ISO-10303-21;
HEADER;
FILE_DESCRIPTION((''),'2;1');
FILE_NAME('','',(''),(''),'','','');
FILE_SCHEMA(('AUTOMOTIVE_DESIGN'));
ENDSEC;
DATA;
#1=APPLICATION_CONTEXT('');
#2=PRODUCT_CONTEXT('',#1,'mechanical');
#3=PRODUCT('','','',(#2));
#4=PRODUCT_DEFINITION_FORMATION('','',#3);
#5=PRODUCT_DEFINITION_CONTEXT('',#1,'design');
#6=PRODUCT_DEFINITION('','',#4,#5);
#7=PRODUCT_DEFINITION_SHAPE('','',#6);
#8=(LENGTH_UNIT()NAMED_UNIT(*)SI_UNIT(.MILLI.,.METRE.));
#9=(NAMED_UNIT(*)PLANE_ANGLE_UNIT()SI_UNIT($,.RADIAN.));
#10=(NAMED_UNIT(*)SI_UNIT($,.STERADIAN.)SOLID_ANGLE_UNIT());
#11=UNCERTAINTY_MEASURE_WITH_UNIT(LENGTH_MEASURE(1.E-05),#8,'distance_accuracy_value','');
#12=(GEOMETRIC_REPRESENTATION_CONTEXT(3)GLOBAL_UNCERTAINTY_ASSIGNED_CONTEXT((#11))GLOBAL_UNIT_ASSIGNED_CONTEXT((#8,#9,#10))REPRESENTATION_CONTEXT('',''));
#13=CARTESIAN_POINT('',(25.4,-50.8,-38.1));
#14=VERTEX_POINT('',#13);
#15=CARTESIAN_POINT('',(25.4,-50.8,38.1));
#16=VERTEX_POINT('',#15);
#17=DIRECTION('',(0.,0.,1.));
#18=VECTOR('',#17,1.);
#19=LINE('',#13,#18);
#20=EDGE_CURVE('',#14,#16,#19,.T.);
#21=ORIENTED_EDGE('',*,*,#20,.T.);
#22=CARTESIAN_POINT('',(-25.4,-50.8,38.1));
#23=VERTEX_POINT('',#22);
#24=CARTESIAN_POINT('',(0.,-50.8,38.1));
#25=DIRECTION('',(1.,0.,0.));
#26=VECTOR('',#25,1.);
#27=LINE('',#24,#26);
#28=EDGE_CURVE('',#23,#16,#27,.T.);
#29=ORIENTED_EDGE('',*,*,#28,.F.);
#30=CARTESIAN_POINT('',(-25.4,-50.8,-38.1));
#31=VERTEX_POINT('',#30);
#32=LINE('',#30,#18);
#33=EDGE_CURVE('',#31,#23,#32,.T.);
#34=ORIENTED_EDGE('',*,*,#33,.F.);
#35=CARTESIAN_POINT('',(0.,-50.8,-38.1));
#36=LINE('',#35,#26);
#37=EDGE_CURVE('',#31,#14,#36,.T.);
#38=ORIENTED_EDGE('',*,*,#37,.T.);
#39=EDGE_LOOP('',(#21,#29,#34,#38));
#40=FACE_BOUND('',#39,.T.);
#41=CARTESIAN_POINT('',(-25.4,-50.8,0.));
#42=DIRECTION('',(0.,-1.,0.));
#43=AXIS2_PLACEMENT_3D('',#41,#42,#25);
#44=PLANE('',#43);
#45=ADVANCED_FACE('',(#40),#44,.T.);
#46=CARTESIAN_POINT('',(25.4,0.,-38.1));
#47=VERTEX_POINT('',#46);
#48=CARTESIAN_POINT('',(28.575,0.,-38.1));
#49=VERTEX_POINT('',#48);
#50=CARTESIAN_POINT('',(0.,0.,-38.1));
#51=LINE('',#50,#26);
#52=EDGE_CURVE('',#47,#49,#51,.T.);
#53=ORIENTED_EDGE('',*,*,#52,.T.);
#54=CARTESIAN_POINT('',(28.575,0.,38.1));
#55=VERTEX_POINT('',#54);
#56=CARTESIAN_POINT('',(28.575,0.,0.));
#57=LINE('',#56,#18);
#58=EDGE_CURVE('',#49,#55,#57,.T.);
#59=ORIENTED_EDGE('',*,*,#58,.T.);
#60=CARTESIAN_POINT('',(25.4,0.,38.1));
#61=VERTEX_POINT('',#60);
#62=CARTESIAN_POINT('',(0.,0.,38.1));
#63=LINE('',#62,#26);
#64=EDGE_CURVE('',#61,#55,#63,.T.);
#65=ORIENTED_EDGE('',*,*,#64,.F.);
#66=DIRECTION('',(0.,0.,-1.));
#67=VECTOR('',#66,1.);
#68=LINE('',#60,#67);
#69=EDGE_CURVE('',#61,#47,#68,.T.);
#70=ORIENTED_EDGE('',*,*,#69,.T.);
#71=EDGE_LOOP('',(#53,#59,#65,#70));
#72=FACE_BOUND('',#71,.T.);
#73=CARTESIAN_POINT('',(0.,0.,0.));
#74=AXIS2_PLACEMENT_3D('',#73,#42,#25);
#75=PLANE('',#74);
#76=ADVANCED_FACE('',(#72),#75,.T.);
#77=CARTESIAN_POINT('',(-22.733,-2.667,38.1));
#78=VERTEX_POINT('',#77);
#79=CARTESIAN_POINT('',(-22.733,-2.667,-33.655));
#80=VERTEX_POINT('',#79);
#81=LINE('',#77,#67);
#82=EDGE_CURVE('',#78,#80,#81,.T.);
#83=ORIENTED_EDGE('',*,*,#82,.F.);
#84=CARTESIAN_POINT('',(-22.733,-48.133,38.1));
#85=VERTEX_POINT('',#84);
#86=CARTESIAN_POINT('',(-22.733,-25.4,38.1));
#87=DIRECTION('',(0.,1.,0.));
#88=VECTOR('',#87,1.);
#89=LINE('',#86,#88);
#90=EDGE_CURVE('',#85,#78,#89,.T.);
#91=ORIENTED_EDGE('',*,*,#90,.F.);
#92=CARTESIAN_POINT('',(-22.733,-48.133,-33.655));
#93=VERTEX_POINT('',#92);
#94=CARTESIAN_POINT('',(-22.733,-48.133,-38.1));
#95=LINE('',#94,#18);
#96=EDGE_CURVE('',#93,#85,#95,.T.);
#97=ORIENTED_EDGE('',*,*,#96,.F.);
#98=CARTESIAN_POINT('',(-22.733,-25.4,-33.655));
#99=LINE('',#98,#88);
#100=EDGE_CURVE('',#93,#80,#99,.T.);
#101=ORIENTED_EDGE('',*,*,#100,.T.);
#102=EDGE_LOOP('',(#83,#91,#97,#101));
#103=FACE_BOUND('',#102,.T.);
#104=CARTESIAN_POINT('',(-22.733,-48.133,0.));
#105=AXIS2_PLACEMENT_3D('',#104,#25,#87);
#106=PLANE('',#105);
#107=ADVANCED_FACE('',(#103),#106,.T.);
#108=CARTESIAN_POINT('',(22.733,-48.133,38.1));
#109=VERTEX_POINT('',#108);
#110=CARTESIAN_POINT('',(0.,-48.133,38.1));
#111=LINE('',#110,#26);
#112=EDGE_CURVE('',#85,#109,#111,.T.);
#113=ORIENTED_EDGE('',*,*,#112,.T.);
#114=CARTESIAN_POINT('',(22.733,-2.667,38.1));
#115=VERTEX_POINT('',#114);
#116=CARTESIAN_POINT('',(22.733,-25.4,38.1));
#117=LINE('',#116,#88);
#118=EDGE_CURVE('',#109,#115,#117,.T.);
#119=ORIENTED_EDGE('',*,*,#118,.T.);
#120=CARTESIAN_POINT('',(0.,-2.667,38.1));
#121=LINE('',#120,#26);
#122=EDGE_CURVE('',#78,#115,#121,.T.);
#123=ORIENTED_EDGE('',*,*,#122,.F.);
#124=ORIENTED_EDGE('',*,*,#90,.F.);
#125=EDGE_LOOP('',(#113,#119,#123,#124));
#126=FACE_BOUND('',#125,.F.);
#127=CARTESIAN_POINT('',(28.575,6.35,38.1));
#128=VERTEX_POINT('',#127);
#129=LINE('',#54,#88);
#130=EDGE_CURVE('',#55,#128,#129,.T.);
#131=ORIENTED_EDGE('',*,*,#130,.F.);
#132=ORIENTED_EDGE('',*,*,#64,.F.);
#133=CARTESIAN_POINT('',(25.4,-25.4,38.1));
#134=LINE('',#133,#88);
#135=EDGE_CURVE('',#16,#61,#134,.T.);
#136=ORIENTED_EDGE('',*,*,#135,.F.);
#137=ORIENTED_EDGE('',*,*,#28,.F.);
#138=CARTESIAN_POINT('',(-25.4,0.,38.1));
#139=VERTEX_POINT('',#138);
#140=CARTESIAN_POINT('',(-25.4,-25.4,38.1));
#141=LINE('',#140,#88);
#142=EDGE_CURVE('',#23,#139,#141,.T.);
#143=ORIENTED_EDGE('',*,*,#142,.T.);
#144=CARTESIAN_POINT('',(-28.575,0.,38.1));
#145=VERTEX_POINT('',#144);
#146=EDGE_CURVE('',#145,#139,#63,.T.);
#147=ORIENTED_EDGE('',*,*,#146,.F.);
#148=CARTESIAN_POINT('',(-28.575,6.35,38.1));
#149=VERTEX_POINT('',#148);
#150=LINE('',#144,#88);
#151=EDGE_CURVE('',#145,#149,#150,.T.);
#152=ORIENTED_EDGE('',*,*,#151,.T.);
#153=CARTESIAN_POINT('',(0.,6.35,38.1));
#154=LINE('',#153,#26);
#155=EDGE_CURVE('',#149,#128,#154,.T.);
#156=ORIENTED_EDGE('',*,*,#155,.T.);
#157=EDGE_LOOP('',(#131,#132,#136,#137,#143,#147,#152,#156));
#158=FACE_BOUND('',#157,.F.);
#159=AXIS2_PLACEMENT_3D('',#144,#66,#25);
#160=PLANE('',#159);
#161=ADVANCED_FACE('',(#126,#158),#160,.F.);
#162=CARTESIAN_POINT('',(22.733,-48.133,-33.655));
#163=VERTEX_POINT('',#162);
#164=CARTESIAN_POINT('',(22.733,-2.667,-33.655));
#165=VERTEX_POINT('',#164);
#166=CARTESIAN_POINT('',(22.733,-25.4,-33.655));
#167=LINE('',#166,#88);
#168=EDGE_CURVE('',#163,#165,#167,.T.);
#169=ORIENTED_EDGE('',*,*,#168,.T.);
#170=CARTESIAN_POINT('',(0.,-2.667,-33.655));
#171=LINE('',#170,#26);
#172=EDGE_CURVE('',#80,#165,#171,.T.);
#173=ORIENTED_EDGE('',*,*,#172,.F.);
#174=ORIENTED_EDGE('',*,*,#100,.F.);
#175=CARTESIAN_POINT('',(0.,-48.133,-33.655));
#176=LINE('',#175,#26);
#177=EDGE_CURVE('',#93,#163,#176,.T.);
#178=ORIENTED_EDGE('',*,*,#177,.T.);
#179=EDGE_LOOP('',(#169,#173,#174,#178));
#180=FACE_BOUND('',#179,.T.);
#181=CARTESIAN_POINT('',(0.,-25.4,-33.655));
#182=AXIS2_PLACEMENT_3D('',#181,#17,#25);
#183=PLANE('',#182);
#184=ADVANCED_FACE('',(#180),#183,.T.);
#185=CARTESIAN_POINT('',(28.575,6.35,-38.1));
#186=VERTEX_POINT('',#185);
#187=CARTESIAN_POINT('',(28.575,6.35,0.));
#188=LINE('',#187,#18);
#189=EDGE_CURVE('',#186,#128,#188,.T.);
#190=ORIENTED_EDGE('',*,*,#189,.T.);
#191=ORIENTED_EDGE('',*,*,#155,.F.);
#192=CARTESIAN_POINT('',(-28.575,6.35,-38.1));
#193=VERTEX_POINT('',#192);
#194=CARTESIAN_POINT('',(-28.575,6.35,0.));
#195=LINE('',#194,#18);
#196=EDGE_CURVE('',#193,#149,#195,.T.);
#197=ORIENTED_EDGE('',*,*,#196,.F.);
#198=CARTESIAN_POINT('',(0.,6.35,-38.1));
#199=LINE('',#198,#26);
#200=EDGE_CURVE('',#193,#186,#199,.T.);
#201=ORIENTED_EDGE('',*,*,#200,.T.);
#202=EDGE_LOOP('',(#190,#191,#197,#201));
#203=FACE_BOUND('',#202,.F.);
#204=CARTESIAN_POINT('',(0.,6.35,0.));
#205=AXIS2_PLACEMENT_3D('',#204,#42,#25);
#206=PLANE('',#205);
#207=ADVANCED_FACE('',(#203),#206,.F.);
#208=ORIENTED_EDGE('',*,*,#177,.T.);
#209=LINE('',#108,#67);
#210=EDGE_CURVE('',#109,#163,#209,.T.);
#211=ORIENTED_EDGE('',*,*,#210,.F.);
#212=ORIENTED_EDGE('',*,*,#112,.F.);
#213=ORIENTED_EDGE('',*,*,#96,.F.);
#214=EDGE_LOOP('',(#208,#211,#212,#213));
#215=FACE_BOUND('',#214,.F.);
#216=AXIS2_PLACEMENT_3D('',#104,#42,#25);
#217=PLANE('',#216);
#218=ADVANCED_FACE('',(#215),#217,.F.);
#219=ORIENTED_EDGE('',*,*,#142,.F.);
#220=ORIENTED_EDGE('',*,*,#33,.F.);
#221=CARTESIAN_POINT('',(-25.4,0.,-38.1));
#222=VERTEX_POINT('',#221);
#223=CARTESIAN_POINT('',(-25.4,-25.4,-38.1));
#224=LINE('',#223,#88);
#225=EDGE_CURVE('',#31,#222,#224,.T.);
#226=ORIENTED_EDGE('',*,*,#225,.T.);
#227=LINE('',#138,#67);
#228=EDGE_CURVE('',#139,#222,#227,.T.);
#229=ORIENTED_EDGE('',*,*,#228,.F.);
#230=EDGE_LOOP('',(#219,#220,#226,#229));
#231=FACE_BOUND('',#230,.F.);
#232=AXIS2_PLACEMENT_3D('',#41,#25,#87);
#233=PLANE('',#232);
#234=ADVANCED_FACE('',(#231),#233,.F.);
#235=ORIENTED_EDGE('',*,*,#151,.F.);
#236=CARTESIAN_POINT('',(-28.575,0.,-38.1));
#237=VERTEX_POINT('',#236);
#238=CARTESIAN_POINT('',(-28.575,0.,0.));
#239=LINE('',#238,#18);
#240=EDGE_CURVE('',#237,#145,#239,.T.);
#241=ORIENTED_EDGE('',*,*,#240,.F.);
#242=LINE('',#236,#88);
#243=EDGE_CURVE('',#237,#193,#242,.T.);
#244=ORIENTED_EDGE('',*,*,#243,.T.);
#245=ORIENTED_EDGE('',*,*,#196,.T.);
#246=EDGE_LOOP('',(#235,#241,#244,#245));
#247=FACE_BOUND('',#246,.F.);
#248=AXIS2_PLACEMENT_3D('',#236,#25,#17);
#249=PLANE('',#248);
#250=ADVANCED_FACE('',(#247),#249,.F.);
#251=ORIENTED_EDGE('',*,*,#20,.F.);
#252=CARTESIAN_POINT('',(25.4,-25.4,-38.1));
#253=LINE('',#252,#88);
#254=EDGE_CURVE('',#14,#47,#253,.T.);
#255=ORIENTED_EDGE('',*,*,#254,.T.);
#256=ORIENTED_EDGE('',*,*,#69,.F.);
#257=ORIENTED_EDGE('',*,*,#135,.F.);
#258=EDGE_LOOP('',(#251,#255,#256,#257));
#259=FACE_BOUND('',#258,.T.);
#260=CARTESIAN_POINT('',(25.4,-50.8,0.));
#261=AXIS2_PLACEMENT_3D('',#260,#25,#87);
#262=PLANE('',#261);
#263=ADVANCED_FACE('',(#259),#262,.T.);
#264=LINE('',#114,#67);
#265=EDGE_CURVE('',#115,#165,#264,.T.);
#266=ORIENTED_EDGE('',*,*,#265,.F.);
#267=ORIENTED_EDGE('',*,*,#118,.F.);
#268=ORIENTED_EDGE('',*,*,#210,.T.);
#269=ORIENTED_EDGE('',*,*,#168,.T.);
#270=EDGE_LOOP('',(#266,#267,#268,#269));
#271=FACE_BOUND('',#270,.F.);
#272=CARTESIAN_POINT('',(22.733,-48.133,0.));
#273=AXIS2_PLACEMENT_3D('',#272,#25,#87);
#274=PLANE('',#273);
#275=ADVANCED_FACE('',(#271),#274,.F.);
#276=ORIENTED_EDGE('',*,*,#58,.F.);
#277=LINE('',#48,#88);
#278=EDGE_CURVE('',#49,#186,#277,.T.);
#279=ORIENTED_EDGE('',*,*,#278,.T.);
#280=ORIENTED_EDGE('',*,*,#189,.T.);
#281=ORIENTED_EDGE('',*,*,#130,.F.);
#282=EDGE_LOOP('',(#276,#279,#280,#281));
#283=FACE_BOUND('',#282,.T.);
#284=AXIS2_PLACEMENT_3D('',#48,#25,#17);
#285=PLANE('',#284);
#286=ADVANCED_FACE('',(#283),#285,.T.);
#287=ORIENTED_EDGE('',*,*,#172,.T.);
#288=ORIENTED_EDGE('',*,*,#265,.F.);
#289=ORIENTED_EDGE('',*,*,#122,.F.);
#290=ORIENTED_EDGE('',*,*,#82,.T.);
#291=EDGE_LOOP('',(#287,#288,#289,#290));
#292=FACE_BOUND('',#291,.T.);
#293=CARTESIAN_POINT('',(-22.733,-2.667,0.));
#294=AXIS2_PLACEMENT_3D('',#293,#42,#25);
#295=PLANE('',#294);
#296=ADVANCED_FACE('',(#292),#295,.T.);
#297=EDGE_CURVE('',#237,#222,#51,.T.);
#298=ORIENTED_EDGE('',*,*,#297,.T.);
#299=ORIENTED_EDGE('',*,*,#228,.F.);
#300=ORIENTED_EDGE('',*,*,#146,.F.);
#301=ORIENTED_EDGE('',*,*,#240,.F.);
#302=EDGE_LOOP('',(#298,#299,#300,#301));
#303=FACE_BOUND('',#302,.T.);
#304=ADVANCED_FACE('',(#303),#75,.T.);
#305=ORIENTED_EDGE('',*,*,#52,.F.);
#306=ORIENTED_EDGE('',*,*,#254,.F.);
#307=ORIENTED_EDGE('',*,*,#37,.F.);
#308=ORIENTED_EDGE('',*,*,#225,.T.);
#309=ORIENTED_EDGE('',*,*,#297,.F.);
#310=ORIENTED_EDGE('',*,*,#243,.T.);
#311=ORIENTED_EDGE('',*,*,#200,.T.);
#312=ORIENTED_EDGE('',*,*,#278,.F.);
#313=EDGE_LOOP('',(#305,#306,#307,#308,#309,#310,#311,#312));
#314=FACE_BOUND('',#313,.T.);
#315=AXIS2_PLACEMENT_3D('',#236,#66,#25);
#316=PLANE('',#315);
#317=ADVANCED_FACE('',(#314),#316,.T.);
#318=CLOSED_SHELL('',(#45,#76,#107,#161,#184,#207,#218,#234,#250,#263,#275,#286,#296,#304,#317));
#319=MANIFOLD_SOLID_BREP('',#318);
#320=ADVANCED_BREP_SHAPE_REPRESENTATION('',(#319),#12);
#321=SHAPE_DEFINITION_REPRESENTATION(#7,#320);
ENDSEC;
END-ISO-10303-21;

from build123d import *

# Parameters (mm, degrees)
F0_W     = 57.15
F0_H     = 76.2
F2_DEPTH = 6.35
F1_W     = 50.8
F1_H     = 50.8
F1_W_2   = 45.466
F1_H_2   = 45.466
F3_DEPTH = 38.1
F4_START = -33.655
F4_DEPTH = 4.445


# Not quite as in the source:
# - a feature names something its author has since deleted; it is built from what else it names


with BuildPart() as f2:
    # F0 (on Front) → F2 (new body)
    with BuildSketch(Plane.XZ):
        Rectangle(F0_W, F0_H)
    extrude(amount=-F2_DEPTH)

    # F1 (on Top) → F3 (join, symmetric)
    with BuildSketch(Plane.XY):
        with Locations((0, -25.4)):
            Rectangle(F1_W, F1_H)
        with Locations((0, -25.4)):
            Rectangle(F1_W_2, F1_H_2, mode=Mode.SUBTRACT)
    extrude(amount=F3_DEPTH, both=True)

    # F1 (on Top) → F4 (join)
    with BuildSketch(Plane.XY.offset(F4_START)):
        with Locations((0, -25.4)):
            Rectangle(F1_W_2, F1_H_2)
    extrude(amount=-F4_DEPTH)


solid = f2.part
